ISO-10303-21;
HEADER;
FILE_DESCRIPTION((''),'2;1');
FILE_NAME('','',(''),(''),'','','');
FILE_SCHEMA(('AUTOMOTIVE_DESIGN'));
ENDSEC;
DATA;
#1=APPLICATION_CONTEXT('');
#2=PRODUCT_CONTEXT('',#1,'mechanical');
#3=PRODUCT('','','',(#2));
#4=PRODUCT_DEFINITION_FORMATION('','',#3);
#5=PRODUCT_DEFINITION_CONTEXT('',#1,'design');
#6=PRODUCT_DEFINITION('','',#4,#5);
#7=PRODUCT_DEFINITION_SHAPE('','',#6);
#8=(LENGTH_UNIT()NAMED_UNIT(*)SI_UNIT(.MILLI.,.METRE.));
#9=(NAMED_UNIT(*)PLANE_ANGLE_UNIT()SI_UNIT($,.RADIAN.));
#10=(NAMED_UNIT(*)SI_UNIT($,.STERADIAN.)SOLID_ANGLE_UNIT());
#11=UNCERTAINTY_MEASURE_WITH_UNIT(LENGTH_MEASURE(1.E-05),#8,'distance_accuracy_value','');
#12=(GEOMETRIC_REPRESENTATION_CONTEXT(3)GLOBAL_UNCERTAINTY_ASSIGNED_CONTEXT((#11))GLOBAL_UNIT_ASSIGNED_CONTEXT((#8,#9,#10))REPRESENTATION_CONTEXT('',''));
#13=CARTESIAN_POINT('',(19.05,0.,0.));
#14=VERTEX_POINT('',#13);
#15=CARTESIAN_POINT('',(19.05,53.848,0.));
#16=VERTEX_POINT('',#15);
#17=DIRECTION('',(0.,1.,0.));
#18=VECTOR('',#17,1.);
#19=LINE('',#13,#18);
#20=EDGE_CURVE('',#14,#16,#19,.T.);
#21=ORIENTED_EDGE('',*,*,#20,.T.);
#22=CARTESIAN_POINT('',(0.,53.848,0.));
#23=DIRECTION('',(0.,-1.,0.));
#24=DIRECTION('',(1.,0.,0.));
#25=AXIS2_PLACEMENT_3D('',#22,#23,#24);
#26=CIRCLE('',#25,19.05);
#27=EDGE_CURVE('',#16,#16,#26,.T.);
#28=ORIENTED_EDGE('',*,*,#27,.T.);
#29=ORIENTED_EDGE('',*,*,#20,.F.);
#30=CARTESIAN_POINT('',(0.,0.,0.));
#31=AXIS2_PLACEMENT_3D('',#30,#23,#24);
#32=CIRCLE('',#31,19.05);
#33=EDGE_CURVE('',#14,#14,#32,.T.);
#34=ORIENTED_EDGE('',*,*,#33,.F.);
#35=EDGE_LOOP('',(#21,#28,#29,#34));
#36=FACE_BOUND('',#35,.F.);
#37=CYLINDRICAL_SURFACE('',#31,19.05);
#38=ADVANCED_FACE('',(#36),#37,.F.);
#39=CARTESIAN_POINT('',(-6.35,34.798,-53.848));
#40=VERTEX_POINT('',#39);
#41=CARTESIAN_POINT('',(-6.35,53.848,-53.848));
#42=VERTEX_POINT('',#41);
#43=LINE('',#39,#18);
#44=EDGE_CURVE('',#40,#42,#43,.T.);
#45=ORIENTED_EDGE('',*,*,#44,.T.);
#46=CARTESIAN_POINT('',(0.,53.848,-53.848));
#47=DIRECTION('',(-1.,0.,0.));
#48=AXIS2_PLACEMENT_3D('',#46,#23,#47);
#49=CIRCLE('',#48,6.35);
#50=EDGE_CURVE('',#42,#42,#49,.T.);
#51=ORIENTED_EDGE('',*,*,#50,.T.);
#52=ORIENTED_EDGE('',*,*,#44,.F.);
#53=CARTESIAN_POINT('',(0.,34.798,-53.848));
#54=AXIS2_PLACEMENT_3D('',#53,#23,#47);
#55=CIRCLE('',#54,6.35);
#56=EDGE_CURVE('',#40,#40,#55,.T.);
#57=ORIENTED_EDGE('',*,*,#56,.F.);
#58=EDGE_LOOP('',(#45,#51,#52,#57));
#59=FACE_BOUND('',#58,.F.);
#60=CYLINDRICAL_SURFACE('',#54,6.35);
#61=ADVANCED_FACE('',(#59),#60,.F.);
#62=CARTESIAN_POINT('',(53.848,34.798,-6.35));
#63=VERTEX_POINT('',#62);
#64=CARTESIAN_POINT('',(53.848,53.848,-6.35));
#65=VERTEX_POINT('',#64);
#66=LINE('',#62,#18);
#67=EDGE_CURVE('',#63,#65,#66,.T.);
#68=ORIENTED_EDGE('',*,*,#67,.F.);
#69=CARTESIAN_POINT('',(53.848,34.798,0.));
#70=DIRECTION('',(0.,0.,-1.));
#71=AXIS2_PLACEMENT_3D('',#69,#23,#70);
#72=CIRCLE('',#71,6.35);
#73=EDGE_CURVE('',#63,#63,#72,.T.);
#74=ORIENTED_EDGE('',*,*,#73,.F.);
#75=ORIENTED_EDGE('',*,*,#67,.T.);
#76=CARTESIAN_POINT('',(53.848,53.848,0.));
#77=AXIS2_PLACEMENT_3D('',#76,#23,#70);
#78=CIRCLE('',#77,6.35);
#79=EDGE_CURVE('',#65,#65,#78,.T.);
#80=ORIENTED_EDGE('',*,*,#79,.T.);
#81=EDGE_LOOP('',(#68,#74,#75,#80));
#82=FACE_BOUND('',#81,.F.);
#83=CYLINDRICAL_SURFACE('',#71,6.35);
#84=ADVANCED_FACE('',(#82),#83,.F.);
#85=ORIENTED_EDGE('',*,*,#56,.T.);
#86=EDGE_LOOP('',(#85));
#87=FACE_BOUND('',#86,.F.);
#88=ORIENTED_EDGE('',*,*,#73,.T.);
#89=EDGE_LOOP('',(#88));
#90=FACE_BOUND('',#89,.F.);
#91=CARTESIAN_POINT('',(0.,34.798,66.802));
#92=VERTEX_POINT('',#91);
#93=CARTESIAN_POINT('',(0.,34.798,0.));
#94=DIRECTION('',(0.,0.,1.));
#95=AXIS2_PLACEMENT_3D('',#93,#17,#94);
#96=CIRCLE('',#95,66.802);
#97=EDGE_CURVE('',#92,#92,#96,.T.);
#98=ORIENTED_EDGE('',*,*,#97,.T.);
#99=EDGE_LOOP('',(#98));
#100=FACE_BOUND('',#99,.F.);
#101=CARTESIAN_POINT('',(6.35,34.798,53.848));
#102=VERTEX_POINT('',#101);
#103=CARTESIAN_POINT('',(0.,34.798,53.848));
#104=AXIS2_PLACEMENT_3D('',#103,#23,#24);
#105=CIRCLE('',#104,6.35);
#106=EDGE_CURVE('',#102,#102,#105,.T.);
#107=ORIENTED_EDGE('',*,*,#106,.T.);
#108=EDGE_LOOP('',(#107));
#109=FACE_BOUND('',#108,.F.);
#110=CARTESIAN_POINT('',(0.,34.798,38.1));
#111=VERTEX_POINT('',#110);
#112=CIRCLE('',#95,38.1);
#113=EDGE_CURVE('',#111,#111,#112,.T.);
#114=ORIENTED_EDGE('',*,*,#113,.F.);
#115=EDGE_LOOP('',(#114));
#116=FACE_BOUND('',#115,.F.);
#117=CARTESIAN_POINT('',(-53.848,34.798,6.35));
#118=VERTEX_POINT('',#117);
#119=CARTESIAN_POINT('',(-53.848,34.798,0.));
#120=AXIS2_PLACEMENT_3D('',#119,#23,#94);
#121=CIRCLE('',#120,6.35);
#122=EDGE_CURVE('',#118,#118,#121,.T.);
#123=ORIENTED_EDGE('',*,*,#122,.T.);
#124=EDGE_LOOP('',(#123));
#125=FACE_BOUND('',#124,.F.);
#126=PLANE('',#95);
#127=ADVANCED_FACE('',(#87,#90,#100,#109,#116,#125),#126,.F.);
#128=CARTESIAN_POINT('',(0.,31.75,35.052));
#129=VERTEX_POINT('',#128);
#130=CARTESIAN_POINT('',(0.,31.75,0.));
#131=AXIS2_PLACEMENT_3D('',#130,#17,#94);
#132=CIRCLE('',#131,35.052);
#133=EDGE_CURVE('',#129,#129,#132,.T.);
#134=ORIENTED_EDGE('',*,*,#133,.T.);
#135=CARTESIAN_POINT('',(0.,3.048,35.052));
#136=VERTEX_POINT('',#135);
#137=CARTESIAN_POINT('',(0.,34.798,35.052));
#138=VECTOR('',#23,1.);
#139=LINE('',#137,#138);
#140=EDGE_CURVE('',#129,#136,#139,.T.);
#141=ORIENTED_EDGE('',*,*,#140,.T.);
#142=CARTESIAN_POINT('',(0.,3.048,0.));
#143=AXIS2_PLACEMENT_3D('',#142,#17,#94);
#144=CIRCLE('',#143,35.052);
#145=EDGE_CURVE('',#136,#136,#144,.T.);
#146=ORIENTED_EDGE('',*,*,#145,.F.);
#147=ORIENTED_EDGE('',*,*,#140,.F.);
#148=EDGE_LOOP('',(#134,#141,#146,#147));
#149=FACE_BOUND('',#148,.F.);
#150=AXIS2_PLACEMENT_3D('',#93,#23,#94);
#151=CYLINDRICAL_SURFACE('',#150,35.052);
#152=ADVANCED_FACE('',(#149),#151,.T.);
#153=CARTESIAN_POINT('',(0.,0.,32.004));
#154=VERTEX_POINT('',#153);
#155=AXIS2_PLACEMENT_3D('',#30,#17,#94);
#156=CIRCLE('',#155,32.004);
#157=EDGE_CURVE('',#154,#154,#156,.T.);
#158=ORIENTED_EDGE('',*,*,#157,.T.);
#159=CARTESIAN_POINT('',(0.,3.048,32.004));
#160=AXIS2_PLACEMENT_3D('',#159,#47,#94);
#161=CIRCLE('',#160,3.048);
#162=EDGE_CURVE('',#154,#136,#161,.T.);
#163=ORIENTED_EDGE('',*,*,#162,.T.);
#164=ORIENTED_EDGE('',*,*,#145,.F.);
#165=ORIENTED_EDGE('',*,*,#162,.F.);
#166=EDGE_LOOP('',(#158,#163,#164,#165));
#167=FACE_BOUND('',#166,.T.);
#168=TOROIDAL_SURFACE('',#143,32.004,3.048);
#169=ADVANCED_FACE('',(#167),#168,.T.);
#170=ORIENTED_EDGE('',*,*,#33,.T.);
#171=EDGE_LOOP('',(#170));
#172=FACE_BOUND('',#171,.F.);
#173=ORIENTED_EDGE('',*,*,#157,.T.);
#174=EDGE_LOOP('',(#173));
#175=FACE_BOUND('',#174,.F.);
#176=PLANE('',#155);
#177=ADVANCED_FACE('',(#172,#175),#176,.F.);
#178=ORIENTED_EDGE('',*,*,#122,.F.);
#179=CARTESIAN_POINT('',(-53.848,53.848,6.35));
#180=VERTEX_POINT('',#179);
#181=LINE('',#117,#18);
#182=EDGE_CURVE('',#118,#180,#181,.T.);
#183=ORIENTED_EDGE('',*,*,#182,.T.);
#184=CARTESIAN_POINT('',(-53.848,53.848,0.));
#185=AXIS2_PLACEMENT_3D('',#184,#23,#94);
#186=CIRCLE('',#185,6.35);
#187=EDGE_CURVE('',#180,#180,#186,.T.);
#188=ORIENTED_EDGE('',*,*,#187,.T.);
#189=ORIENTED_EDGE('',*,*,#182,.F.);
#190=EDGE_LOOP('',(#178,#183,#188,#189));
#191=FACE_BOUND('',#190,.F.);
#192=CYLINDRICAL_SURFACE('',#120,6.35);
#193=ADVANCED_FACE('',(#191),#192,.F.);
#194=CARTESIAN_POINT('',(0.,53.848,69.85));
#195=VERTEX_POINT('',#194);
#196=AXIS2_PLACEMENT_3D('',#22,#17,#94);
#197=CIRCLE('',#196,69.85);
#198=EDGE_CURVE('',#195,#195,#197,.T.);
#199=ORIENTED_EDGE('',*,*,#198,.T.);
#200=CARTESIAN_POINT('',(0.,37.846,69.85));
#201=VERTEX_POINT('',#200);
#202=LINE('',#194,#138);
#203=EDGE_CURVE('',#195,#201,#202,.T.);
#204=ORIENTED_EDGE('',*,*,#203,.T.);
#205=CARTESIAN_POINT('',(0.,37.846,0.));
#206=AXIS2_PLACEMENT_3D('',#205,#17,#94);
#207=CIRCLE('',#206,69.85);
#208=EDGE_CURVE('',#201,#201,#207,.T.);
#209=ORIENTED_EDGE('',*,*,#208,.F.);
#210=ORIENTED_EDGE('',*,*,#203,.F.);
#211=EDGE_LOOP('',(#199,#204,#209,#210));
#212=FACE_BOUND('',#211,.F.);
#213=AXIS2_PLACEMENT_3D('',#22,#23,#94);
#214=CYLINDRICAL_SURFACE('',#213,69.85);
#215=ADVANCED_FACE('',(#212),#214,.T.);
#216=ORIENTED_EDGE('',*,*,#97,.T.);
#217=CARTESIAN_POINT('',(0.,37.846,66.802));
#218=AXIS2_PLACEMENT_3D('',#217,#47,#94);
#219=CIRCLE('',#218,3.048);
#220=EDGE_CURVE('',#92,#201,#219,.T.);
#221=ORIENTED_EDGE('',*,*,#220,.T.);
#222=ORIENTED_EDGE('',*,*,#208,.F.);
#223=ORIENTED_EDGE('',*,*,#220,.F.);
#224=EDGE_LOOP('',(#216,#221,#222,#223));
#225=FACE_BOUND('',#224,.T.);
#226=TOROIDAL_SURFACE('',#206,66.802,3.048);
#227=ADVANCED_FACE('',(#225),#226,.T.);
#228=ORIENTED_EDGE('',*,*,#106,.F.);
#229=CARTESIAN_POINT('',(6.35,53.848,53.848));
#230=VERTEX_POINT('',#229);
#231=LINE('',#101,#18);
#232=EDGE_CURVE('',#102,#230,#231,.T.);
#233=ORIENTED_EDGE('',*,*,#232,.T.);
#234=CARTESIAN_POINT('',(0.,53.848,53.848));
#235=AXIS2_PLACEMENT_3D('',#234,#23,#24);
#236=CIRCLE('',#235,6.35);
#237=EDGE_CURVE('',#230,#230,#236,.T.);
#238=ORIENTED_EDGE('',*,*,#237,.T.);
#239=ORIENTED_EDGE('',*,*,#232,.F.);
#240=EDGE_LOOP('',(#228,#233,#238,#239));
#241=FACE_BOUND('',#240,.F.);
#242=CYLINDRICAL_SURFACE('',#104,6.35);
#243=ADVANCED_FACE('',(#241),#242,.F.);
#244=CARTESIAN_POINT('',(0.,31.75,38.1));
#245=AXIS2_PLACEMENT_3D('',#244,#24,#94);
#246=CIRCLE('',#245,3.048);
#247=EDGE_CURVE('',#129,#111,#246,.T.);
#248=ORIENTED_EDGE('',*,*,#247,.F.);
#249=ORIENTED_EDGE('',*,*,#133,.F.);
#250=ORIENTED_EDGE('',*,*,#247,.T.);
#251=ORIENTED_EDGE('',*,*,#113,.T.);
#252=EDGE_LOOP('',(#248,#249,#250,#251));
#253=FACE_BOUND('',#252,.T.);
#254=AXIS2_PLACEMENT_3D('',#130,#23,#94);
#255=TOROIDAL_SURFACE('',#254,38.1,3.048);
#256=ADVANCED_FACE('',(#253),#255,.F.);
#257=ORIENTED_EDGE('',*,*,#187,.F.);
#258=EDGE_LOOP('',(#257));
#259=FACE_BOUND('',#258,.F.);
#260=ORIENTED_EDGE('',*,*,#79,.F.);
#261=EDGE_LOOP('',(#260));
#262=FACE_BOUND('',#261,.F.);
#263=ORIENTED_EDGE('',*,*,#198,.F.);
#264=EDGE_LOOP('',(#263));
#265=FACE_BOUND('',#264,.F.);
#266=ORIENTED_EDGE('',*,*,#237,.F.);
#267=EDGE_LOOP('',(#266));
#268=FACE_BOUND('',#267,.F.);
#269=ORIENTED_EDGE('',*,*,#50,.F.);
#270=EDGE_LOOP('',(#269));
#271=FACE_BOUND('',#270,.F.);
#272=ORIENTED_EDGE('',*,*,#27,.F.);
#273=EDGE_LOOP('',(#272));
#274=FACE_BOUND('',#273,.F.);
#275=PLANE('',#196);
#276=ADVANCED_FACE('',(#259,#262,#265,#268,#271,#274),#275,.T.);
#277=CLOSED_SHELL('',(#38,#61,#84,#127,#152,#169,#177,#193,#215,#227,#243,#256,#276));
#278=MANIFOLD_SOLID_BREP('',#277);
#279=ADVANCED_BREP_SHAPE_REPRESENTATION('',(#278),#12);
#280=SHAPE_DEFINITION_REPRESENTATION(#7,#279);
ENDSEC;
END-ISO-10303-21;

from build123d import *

# Parameters (mm, degrees)
F2_R            = 19.05
F3_DEPTH        = 53.849
F4_R            = 3.048
F5_R            = 6.35
F6_DEPTH        = 19.051
F6_COPIES_COUNT = 4


# Not quite as in the source:
# - a pattern or mirror of a feature is missing from the dataset's text; its kind, count and spacing are read off the source's solid


with BuildPart() as f1:
    # F0 (on Right) → F1 (revolve)
    with BuildSketch(Plane.YZ):
        Polygon((0, 35.052), (0, 0), (53.848, 0), (53.848, 69.85), (34.798, 69.85), (34.798, 35.052), align=None)
    revolve(axis=Axis((0, 38.2506623864, 0), (0, 1, 0)))

    # F2 (on Front) → F3 (cut, through all)
    with BuildSketch(Plane.XZ):
        Circle(F2_R)
    extrude(amount=-F3_DEPTH, mode=Mode.SUBTRACT)

    # F4
    f4_edges = [f1.edges().sort_by_distance(p)[0] for p in [
        (0, 0, -35.052),
        (0, 34.798, -35.052),
        (0, 34.798, -69.85),
    ]]
    fillet(f4_edges, radius=F4_R)

    # F5 (on face) → F6 (cut, through all)
    with BuildSketch(Plane.XZ.offset(-34.798)):
        with Locations((0, 53.848)):
            Circle(F5_R)
    f6 = extrude(amount=-F6_DEPTH, mode=Mode.SUBTRACT)

    # F6_copies: F6 ×4 about axis
    f6_copies_axis = Axis((0, 0, 0), (0, 1, 0))
    for i in range(1, F6_COPIES_COUNT):
        add(f6.rotate(f6_copies_axis, i * 360 / F6_COPIES_COUNT), mode=Mode.SUBTRACT)


solid = f1.part
